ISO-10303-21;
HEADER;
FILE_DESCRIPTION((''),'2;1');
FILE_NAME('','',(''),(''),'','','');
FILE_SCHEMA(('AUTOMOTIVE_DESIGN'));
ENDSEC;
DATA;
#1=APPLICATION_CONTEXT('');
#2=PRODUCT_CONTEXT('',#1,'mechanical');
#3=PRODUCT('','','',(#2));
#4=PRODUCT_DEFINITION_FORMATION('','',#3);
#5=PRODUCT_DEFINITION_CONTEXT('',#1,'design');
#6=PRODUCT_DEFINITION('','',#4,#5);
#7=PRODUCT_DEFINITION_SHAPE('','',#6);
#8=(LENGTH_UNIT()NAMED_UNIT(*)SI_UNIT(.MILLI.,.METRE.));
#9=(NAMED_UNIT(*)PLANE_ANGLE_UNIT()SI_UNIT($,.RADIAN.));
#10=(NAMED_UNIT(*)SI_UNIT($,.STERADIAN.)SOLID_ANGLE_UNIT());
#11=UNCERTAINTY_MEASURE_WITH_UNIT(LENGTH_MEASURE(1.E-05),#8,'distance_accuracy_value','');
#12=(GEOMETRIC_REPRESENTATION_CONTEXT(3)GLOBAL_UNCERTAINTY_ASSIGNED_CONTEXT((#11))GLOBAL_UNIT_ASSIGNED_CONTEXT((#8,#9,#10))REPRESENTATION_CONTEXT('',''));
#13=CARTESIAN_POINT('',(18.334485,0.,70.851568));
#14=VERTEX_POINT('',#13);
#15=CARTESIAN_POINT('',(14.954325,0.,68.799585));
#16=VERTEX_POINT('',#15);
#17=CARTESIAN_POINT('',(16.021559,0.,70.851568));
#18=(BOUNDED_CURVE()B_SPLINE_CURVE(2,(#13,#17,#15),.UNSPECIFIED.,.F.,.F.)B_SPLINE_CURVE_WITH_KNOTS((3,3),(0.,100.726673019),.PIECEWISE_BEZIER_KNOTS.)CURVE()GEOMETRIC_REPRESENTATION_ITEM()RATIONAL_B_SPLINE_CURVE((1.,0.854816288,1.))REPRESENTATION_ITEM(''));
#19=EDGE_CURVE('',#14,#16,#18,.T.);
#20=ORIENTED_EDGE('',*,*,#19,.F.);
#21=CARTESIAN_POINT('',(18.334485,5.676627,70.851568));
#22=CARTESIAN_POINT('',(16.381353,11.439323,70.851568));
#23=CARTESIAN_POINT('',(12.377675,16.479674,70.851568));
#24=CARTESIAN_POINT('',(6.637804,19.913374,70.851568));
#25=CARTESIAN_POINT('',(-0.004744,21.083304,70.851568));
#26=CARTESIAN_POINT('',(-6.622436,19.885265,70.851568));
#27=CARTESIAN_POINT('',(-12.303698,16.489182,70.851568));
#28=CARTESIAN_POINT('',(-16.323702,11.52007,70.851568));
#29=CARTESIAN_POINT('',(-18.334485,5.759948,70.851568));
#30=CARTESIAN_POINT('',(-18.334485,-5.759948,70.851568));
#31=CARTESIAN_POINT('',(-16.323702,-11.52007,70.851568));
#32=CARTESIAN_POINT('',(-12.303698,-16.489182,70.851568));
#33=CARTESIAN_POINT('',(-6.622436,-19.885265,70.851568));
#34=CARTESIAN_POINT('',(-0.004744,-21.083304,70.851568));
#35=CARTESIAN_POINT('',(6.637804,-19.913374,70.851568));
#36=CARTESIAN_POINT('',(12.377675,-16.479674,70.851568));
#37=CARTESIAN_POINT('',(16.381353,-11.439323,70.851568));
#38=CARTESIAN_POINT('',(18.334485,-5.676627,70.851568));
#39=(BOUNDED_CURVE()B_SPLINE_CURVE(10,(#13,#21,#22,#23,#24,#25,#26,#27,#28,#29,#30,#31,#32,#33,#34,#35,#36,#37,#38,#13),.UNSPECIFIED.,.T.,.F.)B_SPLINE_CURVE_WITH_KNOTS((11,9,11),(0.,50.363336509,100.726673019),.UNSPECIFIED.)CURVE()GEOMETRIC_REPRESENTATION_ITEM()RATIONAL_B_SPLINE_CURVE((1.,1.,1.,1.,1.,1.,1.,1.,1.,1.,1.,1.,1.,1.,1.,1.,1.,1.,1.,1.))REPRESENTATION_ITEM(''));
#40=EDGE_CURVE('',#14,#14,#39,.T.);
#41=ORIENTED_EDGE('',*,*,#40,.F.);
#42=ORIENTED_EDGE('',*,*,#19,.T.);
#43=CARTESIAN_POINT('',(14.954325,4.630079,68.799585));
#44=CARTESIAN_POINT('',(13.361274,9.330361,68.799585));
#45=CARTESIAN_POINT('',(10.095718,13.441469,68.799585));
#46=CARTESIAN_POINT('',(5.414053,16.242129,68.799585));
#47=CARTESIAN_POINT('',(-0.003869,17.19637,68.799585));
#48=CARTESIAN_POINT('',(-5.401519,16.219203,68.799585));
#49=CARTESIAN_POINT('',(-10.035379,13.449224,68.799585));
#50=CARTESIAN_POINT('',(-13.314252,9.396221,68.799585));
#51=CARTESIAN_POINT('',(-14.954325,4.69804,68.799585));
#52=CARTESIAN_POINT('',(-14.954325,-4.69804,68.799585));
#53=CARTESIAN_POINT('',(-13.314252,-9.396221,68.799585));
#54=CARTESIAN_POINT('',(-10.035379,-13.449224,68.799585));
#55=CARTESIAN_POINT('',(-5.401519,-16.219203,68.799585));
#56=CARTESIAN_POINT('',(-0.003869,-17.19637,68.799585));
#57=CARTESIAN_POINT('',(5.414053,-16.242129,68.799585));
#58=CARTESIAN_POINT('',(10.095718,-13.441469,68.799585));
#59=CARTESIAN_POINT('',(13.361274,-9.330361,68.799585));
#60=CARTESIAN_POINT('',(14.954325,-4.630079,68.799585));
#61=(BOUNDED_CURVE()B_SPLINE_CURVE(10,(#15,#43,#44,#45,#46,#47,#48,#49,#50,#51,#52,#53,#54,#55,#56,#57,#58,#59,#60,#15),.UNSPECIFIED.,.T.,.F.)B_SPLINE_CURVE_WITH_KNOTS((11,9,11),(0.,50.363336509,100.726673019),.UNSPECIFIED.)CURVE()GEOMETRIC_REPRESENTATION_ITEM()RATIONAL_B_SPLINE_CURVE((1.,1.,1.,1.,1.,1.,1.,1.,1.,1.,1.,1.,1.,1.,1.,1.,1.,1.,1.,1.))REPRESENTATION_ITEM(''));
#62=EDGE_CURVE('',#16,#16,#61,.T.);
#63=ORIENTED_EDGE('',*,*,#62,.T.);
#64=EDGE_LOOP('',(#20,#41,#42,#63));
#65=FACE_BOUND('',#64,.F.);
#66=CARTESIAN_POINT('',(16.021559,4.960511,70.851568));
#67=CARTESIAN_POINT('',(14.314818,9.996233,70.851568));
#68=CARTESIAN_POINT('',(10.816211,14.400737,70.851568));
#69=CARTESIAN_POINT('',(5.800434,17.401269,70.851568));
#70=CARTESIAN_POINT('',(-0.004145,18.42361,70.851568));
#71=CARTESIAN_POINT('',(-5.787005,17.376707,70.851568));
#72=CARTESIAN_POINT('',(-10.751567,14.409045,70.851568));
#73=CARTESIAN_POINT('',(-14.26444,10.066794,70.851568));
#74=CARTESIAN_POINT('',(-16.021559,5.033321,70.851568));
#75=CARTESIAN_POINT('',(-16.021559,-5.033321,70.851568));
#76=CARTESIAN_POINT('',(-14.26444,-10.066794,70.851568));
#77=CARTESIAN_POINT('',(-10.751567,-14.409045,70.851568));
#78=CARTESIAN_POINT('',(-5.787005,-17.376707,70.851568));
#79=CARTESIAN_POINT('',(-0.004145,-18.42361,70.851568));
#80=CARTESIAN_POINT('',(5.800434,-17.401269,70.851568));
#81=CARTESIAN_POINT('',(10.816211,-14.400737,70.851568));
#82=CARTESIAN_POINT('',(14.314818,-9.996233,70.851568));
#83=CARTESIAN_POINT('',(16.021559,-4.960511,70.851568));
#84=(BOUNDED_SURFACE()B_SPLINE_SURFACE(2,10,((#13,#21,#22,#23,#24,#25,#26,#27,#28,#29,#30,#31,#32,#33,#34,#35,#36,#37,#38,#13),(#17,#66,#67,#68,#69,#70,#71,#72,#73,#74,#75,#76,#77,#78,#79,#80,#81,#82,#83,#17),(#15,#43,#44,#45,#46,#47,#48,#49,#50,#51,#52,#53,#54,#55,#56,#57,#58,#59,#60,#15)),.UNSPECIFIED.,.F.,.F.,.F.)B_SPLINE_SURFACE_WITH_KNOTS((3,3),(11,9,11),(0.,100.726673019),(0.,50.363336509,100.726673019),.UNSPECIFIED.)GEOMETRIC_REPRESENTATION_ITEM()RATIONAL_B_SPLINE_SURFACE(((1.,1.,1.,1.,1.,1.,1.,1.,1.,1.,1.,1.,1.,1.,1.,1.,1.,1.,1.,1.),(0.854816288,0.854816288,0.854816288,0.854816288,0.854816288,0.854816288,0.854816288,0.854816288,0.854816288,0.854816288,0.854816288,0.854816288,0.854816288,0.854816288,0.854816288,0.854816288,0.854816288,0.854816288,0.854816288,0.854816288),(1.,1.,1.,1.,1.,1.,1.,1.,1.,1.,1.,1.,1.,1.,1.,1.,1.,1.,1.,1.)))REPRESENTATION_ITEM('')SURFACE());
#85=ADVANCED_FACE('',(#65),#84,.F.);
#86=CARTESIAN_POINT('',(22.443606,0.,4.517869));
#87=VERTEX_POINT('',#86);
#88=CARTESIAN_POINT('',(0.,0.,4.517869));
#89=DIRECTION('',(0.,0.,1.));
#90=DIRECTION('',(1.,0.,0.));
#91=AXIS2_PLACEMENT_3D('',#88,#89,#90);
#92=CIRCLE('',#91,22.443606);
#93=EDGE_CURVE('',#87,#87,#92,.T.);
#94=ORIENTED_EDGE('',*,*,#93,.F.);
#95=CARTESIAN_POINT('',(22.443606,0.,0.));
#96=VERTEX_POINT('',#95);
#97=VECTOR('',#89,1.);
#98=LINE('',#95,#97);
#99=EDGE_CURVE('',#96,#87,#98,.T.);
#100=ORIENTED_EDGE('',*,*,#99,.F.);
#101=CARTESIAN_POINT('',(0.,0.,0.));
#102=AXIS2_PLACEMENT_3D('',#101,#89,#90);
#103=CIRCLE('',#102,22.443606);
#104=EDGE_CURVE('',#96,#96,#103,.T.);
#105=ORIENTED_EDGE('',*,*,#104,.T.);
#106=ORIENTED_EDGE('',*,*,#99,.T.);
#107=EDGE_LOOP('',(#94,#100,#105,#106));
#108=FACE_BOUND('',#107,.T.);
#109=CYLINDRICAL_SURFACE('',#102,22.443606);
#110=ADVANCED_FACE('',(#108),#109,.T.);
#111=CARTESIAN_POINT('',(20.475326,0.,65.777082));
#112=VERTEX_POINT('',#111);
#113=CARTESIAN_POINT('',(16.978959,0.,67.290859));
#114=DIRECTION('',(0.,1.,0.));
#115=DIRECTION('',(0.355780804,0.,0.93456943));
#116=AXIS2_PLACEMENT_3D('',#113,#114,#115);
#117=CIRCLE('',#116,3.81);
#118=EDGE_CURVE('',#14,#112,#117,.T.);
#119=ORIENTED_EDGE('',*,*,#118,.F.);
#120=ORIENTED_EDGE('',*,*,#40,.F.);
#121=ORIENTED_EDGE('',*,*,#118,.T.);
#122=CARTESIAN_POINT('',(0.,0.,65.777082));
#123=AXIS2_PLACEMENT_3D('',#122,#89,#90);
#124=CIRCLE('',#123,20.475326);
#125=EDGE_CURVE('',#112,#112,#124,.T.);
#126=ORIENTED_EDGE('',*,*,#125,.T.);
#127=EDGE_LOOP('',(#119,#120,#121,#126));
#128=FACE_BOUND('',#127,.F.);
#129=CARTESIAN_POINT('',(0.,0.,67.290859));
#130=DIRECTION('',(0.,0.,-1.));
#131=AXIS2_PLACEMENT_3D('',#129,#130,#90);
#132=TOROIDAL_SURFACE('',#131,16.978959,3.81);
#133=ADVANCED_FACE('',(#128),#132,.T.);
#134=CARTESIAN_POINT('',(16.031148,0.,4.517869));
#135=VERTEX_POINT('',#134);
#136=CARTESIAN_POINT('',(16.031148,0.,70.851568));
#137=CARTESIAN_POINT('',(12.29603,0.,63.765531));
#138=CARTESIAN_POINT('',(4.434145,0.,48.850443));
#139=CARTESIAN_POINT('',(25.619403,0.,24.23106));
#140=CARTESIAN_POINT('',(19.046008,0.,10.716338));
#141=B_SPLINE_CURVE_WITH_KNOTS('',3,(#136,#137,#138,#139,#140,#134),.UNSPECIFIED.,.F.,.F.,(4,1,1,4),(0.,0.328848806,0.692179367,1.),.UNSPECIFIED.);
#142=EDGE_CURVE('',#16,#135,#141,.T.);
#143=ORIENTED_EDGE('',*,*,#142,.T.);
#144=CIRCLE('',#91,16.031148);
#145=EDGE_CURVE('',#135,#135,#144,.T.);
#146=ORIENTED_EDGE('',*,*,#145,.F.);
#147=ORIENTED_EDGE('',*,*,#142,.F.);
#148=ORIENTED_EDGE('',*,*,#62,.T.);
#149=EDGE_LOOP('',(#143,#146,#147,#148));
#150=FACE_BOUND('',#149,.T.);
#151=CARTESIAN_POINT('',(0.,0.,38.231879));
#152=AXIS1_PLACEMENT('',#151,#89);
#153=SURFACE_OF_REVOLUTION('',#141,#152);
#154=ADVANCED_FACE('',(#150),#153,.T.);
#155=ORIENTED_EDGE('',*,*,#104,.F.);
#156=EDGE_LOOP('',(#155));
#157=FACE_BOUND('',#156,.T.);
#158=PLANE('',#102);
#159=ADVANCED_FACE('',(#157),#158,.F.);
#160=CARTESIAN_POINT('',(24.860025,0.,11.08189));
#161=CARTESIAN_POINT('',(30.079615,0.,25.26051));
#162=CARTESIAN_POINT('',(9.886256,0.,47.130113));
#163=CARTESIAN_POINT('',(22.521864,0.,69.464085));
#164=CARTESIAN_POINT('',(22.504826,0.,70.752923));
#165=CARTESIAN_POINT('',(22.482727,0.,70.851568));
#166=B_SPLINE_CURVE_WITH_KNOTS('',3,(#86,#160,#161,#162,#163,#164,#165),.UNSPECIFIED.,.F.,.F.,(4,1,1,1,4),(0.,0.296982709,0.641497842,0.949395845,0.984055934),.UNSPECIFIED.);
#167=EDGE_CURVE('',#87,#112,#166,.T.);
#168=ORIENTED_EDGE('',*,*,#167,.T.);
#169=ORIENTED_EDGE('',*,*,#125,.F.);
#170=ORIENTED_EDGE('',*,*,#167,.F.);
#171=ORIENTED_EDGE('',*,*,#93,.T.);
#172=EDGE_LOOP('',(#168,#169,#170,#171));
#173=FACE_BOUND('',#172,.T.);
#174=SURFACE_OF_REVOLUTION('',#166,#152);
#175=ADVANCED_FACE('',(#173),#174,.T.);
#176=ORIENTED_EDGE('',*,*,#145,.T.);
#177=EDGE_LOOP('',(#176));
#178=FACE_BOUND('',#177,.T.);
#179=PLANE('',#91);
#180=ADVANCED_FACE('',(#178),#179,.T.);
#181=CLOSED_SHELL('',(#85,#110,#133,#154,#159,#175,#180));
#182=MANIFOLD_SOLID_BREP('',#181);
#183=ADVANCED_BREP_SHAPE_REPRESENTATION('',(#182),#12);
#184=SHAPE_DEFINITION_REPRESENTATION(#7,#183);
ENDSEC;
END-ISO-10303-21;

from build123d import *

# Parameters (mm, degrees)
F2_R = 3.81


# Not quite as in the source:
# - a fillet or chamfer that OpenCascade refuses, or shapes differently, is made with other operations: its cross-section is extruded or revolved along the edge and cut away or added


with BuildPart() as f1:
    # F0 (on Front) → F1 (revolve)
    with BuildSketch(Plane.XZ):
        with BuildLine():
            Line((16.0311479121, 4.5178690925), (22.4436055869, 4.5178690925))
            add(Edge.make_bspline(
                [(22.4436055869, 4.5178690925), (24.8600250445, 11.0818898502), (30.0796146771, 25.2605104483), (9.8862561783, 47.130113274), (22.5218644375, 69.4640848416), (22.5048259424, 70.7529232387), (22.4827266771, 70.8515682757)],
                knots=[0, 0, 0, 0, 0.2969827086, 0.6414978418, 0.9493958447, 0.9840559336, 0.9840559336, 0.9840559336, 0.9840559336], degree=3))
            Line((22.4827266771, 70.8515682757), (16.0311479121, 70.8515682757))
            add(Edge.make_bspline(
                [(16.0311479121, 70.8515682757), (12.2960300416, 63.7655309581), (4.4341449473, 48.8504431093), (25.6194031292, 24.2310595898), (19.0460076919, 10.7163383464), (16.0311479121, 4.5178690925)],
                knots=[0, 0, 0, 0, 0.3288488059, 0.6921793675, 1, 1, 1, 1], degree=3))
        make_face()
        Polygon((0, 4.5178690925), (0, 0), (22.4436055869, 0), (22.4436055869, 4.5178690925), (16.0311479121, 4.5178690925), align=None)
    revolve(axis=Axis((0, 0, 38.2318794727), (0, 0, 1)))

    # F2
    f2_edges = [f1.edges().sort_by_distance(p)[0] for p in [
        (-16.031148, 0, 70.851568),
    ]]
    fillet(f2_edges, radius=F2_R)

    # F3: fillet of radius 3.81 on 1 edges, made by hand

    # F3_s1 → F3_t2 (revolve, cut)
    with BuildSketch(Plane.XZ):
        with BuildLine():
            ThreePointArc((18.3344840685, 70.8515682757), (20.4893461193, 68.7718326579), (20.4753256974, 65.7770815621))
            Line((20.4753256974, 65.7770815621), (20.5452530272, 65.7468060184))
            ThreePointArc((20.5452530272, 65.7468060184), (21.6482045261, 68.2389620465), (22.5570835846, 70.8682263162))
            Line((22.5570835846, 70.8682263162), (22.4827266771, 70.9277682757))
            ThreePointArc((22.4827266771, 70.9277682757), (20.4086053728, 70.9277682757), (18.3615945657, 70.9227824663))
            Line((18.3615945657, 70.9227824663), (18.3344840685, 70.8515682757))
        make_face()
    revolve(axis=Axis((0, 0, 70.8515682757), (0, 0, 1)), mode=Mode.SUBTRACT)


solid = f1.part
